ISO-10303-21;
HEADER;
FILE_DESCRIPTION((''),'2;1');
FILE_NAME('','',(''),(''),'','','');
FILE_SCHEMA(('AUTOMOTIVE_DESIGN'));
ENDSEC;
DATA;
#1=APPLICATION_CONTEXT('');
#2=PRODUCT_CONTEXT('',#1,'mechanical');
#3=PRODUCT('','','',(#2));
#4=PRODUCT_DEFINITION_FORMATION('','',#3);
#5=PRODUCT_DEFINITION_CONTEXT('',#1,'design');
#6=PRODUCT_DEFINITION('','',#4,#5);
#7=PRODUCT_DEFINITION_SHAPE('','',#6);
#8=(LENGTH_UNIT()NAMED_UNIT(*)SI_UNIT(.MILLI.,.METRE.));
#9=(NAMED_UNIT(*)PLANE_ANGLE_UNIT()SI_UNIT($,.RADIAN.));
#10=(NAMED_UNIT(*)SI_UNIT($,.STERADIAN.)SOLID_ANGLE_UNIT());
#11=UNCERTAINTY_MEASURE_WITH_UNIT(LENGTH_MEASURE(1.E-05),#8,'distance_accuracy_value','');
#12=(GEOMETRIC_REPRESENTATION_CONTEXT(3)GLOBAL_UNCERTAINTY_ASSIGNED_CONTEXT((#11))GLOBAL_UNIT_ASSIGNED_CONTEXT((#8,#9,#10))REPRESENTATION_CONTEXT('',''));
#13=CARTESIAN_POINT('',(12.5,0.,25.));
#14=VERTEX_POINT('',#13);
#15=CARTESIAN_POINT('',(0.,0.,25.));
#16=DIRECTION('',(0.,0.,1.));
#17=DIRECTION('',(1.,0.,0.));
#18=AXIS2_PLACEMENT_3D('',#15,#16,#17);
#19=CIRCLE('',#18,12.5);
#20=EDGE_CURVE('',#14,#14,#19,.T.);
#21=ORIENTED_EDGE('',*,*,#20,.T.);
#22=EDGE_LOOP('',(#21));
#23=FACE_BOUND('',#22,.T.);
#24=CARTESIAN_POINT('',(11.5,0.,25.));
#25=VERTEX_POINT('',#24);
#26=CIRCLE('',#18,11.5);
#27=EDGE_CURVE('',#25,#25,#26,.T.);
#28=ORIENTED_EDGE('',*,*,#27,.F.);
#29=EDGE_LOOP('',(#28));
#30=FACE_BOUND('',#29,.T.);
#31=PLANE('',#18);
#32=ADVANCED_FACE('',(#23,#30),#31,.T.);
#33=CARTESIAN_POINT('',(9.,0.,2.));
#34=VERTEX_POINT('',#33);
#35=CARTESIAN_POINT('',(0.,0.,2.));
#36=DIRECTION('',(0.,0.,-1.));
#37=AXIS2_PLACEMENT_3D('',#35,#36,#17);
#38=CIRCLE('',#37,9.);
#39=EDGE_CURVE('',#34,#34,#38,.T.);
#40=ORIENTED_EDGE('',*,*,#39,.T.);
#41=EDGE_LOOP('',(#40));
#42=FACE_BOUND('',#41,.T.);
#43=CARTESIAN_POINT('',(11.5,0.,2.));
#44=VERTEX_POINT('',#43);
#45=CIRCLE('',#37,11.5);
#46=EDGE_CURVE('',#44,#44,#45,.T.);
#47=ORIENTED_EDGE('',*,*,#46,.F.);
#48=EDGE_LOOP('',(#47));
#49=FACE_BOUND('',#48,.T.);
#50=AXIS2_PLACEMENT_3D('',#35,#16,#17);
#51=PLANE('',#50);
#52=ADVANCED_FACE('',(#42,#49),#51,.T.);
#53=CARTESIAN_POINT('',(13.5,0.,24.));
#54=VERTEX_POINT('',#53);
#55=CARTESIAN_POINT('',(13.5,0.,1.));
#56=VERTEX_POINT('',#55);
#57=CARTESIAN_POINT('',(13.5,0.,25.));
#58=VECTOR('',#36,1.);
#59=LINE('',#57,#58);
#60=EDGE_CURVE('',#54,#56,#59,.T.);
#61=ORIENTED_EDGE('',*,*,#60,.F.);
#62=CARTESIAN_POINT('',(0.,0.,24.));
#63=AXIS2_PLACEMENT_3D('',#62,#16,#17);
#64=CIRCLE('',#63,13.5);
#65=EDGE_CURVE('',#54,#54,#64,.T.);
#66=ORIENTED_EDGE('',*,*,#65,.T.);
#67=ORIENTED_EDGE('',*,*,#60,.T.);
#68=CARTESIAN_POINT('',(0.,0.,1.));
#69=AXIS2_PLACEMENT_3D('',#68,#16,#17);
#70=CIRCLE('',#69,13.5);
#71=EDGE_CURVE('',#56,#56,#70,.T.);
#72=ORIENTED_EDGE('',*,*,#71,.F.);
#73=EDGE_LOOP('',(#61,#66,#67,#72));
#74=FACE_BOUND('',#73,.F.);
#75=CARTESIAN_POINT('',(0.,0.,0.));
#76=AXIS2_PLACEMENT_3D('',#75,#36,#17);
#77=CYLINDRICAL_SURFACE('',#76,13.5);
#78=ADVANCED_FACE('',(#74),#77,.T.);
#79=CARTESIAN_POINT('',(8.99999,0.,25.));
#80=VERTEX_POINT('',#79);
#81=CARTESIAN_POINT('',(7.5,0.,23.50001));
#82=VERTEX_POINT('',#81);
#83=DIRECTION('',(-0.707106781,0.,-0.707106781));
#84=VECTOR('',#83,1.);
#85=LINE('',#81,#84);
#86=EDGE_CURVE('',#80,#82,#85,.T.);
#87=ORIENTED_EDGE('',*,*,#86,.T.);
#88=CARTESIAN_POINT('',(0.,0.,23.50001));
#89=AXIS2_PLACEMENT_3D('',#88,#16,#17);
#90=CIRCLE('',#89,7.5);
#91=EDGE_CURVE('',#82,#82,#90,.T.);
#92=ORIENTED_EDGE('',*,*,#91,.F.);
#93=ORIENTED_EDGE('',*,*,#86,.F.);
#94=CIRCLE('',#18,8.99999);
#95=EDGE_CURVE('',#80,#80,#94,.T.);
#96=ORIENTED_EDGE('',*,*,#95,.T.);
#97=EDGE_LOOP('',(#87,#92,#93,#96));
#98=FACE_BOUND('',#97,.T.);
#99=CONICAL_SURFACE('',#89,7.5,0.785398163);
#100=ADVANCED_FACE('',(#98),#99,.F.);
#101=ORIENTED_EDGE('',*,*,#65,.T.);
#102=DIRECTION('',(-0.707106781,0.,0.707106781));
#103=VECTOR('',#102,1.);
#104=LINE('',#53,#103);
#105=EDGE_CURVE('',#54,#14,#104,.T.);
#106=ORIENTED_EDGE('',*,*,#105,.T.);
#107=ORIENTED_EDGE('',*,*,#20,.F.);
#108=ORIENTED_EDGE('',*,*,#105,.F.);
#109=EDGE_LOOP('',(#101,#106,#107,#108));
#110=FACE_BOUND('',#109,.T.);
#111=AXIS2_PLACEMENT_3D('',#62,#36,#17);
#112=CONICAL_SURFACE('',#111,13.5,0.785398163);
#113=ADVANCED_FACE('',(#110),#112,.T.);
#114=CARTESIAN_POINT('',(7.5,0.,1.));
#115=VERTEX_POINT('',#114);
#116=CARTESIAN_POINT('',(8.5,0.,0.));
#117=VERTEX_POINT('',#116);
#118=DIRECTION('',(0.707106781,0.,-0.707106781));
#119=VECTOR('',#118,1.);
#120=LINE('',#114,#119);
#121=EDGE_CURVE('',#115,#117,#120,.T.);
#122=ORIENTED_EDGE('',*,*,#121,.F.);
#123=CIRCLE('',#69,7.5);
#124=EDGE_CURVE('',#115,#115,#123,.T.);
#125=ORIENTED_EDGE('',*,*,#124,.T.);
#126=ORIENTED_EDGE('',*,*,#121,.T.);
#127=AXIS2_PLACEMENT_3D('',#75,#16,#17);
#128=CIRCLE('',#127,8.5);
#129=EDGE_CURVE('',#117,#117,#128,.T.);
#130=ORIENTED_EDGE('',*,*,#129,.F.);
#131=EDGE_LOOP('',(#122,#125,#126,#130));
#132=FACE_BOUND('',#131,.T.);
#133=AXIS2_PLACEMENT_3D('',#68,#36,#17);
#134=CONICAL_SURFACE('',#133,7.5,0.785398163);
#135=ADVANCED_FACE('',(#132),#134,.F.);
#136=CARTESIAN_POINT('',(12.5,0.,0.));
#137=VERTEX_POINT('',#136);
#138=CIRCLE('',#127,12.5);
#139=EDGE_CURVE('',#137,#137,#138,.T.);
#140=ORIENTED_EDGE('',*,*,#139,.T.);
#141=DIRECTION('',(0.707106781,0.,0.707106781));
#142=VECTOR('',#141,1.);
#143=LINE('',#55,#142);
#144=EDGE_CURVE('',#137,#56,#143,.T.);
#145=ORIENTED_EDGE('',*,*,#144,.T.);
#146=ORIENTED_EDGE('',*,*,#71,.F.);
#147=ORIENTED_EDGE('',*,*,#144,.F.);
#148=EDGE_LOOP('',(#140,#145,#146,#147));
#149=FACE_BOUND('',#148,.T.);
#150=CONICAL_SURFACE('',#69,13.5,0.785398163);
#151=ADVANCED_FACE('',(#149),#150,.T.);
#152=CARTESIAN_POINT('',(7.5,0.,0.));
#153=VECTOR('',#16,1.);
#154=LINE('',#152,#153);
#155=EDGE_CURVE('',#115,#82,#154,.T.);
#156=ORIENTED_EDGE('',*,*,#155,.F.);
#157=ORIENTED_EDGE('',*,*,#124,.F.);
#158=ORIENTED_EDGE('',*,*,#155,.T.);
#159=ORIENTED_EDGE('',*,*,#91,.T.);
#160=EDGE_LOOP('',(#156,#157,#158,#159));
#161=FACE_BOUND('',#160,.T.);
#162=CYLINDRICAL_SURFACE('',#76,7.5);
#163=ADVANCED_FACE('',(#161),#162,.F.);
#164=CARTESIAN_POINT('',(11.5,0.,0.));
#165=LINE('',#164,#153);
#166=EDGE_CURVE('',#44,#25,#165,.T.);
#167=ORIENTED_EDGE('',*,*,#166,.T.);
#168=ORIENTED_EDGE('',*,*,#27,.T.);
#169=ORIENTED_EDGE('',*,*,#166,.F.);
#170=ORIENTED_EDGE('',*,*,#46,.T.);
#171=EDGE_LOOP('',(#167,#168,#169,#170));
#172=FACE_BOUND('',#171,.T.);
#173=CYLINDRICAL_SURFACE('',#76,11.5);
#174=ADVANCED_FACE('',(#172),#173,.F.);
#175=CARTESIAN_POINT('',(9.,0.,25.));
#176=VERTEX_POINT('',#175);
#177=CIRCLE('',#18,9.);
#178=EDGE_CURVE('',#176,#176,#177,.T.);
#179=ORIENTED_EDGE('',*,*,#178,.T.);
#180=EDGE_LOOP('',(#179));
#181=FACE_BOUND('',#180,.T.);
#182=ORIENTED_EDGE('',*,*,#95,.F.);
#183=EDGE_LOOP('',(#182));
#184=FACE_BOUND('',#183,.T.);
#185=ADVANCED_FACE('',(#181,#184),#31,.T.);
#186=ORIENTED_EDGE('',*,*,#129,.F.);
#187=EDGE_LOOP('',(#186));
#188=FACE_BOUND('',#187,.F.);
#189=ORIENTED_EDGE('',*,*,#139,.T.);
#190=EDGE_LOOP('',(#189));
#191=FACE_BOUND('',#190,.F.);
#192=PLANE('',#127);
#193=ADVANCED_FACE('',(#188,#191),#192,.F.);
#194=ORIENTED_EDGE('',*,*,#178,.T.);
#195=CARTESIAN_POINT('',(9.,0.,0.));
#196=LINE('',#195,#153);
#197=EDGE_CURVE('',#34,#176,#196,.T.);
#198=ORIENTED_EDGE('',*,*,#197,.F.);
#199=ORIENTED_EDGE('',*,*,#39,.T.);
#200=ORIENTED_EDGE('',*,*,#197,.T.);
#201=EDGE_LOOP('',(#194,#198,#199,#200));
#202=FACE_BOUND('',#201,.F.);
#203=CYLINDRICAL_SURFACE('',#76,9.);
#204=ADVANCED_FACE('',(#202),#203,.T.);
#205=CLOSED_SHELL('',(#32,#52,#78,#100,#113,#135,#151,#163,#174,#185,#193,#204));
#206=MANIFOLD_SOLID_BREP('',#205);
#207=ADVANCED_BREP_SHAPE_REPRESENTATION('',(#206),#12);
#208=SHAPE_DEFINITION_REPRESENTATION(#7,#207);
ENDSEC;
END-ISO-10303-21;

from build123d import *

# Parameters (mm, degrees)
F2_R     = 13.5
F2_R_2   = 11.5
F2_R_3   = 9
F2_R_4   = 7.5
F3_DEPTH = 2
F4_DEPTH = 25
F5_SIZE  = 1.49999
F6_SIZE  = 1


# Not quite as in the source:
# - a fillet or chamfer is up to 0.001 mm smaller than in the source, because OpenCascade refuses the exact size


with BuildPart() as f3:
    # F2 (on Top) → F3 (new body)
    with BuildSketch(Plane.XY):
        Circle(F2_R)
        Circle(F2_R_2, mode=Mode.SUBTRACT)
        Circle(F2_R_2)
        Circle(F2_R_3, mode=Mode.SUBTRACT)
        Circle(F2_R_3)
        Circle(F2_R_4, mode=Mode.SUBTRACT)
    extrude(amount=F3_DEPTH)

    # F2 (on Top) → F4 (join)
    with BuildSketch(Plane.XY):
        Circle(F2_R)
        Circle(F2_R_2, mode=Mode.SUBTRACT)
        Circle(F2_R_3)
        Circle(F2_R_4, mode=Mode.SUBTRACT)
    extrude(amount=F4_DEPTH)

    # F5 (size 1.5 in the source; OpenCascade refuses exactly that, so slightly less here)
    f5_edges = [f3.edges().sort_by_distance(p)[0] for p in [
        (-7.5, 0, 25),
    ]]
    chamfer(f5_edges, length=F5_SIZE)

    # F6
    f6_edges = [f3.edges().sort_by_distance(p)[0] for p in [
        (-13.5, 0, 25),
        (-13.5, 0, 0),
        (-7.5, 0, 0),
    ]]
    chamfer(f6_edges, length=F6_SIZE)


solid = f3.part
